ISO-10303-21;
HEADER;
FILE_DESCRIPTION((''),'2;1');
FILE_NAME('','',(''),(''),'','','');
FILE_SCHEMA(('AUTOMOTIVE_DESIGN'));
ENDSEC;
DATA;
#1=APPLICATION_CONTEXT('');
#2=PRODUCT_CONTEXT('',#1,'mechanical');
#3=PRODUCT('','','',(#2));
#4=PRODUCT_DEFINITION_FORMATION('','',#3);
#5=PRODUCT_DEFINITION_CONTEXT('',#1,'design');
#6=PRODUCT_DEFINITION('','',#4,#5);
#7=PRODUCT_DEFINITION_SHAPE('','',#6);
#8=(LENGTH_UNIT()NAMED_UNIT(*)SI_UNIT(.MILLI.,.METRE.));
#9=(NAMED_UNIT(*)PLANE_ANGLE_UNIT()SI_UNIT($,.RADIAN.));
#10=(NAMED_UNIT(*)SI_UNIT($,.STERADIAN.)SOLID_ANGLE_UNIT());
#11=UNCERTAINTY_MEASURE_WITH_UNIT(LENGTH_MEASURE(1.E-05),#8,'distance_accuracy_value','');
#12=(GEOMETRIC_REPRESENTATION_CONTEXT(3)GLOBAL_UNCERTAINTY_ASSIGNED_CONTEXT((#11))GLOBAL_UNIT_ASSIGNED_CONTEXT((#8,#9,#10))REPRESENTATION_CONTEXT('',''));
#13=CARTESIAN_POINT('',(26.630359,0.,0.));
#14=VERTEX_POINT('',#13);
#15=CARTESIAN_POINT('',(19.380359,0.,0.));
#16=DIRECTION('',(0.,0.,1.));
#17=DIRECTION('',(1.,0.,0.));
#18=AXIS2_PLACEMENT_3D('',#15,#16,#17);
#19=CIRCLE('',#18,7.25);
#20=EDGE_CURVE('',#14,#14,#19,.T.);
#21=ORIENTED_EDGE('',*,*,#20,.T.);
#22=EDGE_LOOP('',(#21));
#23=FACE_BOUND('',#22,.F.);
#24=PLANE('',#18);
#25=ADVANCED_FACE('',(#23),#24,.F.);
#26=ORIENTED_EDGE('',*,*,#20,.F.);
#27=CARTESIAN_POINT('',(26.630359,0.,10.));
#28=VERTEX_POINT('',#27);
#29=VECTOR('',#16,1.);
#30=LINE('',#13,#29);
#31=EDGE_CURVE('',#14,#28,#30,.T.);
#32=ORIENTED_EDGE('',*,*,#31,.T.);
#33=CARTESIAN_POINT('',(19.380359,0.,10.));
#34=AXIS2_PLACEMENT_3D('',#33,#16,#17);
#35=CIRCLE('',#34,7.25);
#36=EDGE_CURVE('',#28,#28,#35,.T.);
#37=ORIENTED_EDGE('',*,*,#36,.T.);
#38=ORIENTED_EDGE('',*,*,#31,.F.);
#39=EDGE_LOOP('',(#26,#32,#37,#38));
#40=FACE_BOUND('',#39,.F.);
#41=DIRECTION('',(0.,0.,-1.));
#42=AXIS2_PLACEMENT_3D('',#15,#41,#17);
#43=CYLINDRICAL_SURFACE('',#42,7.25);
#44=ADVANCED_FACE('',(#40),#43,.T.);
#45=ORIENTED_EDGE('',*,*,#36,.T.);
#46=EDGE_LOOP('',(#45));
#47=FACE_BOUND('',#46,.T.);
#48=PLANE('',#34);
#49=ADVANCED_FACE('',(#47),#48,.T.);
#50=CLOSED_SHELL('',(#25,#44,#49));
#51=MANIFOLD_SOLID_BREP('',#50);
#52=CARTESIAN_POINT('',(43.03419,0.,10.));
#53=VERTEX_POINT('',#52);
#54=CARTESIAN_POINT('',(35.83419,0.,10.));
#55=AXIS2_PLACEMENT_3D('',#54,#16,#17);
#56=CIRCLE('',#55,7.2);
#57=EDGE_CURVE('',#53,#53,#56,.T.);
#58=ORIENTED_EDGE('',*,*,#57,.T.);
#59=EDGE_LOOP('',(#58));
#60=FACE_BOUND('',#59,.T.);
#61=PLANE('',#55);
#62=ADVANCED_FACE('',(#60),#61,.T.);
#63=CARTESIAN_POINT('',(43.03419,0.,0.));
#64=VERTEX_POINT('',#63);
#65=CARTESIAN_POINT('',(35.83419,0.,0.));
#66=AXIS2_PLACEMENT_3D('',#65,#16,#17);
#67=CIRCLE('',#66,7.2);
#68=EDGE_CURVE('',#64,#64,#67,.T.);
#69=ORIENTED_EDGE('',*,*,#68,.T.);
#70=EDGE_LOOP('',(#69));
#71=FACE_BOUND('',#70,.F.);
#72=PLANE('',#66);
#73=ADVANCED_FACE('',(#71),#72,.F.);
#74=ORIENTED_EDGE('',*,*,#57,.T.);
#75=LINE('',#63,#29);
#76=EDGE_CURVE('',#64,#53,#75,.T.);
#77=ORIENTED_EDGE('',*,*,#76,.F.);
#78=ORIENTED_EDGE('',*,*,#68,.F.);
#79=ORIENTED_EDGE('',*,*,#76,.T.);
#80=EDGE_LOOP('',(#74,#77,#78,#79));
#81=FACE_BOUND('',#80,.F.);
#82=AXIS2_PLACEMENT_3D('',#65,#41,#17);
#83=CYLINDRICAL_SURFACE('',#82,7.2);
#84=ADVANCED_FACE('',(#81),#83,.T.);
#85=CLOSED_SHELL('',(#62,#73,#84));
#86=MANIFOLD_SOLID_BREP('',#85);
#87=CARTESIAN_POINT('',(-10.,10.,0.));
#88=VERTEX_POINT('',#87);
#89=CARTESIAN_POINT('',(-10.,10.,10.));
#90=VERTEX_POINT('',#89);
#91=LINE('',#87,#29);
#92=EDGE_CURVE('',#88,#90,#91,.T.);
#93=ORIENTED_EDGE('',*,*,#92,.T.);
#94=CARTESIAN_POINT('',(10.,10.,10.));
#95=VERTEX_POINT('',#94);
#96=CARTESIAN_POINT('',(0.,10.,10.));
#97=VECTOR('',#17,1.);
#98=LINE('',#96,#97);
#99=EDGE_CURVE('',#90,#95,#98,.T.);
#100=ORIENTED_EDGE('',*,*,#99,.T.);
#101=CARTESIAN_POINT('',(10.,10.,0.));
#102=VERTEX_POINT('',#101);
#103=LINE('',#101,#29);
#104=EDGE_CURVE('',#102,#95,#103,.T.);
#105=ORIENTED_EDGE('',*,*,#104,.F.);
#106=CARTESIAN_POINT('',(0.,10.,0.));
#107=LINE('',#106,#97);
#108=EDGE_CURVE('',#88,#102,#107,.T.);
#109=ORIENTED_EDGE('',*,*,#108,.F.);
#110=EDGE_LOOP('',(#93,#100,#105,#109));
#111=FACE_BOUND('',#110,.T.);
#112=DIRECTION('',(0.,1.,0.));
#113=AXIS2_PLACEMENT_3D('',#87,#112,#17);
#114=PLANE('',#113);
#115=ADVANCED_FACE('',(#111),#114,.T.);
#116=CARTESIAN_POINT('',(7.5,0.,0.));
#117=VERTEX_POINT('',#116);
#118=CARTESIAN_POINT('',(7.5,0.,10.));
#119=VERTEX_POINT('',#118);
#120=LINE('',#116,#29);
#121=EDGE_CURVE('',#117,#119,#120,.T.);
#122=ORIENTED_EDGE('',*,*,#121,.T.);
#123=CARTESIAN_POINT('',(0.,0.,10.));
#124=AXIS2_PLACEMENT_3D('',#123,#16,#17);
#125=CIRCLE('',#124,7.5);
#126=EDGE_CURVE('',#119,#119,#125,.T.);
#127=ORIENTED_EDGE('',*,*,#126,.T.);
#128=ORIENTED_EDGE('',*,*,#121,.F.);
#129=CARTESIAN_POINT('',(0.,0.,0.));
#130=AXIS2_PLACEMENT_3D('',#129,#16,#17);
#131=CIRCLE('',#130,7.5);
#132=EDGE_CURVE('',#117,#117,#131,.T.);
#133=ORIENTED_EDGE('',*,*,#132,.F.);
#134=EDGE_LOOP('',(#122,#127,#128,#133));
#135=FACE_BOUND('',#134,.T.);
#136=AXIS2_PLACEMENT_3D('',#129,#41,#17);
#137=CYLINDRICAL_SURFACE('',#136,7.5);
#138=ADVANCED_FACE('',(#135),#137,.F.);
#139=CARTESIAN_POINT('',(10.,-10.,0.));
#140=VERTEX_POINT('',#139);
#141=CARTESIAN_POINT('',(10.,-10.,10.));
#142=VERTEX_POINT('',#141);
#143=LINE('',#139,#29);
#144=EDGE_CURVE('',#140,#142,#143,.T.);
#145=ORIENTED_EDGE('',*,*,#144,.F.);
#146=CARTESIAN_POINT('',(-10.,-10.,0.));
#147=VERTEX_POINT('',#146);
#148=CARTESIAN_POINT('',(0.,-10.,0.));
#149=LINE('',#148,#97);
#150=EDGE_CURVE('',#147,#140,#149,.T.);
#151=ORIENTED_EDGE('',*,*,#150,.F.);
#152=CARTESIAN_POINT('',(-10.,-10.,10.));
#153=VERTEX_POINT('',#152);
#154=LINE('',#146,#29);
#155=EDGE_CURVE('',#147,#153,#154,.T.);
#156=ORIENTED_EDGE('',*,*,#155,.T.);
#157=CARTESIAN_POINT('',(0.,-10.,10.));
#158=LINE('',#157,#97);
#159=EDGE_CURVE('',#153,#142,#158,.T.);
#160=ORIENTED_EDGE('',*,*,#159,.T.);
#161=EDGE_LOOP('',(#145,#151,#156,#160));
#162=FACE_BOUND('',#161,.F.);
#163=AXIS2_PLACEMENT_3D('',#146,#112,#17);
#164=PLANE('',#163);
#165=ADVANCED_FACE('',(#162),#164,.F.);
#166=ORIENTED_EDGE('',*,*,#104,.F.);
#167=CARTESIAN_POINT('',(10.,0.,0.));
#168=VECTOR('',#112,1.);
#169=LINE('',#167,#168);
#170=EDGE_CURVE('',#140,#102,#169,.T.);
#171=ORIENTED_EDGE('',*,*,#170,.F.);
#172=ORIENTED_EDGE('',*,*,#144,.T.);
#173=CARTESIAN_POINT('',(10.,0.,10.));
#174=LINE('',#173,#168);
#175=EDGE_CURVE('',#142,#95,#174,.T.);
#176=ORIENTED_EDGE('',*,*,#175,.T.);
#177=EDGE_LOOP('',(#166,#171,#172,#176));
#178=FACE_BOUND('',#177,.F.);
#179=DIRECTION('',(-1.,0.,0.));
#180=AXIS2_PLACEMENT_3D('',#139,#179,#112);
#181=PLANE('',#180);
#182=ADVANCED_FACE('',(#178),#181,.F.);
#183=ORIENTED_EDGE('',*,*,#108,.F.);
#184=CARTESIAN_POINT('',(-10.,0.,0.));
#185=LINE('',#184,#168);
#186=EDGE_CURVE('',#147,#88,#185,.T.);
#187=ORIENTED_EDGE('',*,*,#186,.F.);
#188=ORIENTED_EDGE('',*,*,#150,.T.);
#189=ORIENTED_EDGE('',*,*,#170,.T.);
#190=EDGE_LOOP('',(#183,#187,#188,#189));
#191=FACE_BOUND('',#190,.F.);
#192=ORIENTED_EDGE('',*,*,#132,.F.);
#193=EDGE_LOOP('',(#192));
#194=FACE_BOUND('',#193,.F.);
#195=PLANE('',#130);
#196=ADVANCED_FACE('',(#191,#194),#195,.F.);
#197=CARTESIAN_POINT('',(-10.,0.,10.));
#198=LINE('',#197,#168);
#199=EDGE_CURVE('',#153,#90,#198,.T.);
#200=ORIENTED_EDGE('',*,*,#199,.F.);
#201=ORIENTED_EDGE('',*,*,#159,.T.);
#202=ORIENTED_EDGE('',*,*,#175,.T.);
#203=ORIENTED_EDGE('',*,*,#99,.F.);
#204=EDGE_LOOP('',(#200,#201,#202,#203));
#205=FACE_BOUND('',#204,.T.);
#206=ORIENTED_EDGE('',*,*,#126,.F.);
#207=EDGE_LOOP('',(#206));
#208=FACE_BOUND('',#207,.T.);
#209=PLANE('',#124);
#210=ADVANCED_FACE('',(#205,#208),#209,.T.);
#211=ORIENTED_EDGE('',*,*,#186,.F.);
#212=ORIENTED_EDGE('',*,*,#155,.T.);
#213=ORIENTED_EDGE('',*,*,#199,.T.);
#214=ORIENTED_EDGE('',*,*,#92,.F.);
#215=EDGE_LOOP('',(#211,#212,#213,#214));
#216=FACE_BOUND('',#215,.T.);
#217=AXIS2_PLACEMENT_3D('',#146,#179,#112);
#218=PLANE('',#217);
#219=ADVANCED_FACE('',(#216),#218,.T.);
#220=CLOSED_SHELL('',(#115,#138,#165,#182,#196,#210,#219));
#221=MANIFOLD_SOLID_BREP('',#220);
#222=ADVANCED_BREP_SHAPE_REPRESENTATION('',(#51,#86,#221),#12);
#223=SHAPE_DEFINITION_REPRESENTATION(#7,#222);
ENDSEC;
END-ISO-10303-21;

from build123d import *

# Parameters (mm, degrees)
F0_W     = 20
F0_H     = 20
F0_R     = 7.5
F1_DEPTH = 10
F0_R_2   = 7.2
F0_R_3   = 7.25


# Not quite as in the source:
# - a feature names something its author has since deleted; it is built from what else it names


with BuildPart() as f1:
    # F0 (on Top) → F1 (new body)
    with BuildSketch(Plane.XY):
        Rectangle(F0_W, F0_H)
        Circle(F0_R, mode=Mode.SUBTRACT)
    extrude(amount=F1_DEPTH)


with BuildPart() as f1b:
    # F0 (on Top) → F1, piece 2 (new body)
    with BuildSketch(Plane.XY):
        with Locations((35.8341895044, 0)):
            Circle(F0_R_2)
    extrude(amount=F1_DEPTH)


with BuildPart() as f1c:
    # F0 (on Top) → F1, piece 3 (new body)
    with BuildSketch(Plane.XY):
        with Locations((19.3803589791, 0)):
            Circle(F0_R_3)
    extrude(amount=F1_DEPTH)


solid = Compound([f1.part, f1b.part, f1c.part])
